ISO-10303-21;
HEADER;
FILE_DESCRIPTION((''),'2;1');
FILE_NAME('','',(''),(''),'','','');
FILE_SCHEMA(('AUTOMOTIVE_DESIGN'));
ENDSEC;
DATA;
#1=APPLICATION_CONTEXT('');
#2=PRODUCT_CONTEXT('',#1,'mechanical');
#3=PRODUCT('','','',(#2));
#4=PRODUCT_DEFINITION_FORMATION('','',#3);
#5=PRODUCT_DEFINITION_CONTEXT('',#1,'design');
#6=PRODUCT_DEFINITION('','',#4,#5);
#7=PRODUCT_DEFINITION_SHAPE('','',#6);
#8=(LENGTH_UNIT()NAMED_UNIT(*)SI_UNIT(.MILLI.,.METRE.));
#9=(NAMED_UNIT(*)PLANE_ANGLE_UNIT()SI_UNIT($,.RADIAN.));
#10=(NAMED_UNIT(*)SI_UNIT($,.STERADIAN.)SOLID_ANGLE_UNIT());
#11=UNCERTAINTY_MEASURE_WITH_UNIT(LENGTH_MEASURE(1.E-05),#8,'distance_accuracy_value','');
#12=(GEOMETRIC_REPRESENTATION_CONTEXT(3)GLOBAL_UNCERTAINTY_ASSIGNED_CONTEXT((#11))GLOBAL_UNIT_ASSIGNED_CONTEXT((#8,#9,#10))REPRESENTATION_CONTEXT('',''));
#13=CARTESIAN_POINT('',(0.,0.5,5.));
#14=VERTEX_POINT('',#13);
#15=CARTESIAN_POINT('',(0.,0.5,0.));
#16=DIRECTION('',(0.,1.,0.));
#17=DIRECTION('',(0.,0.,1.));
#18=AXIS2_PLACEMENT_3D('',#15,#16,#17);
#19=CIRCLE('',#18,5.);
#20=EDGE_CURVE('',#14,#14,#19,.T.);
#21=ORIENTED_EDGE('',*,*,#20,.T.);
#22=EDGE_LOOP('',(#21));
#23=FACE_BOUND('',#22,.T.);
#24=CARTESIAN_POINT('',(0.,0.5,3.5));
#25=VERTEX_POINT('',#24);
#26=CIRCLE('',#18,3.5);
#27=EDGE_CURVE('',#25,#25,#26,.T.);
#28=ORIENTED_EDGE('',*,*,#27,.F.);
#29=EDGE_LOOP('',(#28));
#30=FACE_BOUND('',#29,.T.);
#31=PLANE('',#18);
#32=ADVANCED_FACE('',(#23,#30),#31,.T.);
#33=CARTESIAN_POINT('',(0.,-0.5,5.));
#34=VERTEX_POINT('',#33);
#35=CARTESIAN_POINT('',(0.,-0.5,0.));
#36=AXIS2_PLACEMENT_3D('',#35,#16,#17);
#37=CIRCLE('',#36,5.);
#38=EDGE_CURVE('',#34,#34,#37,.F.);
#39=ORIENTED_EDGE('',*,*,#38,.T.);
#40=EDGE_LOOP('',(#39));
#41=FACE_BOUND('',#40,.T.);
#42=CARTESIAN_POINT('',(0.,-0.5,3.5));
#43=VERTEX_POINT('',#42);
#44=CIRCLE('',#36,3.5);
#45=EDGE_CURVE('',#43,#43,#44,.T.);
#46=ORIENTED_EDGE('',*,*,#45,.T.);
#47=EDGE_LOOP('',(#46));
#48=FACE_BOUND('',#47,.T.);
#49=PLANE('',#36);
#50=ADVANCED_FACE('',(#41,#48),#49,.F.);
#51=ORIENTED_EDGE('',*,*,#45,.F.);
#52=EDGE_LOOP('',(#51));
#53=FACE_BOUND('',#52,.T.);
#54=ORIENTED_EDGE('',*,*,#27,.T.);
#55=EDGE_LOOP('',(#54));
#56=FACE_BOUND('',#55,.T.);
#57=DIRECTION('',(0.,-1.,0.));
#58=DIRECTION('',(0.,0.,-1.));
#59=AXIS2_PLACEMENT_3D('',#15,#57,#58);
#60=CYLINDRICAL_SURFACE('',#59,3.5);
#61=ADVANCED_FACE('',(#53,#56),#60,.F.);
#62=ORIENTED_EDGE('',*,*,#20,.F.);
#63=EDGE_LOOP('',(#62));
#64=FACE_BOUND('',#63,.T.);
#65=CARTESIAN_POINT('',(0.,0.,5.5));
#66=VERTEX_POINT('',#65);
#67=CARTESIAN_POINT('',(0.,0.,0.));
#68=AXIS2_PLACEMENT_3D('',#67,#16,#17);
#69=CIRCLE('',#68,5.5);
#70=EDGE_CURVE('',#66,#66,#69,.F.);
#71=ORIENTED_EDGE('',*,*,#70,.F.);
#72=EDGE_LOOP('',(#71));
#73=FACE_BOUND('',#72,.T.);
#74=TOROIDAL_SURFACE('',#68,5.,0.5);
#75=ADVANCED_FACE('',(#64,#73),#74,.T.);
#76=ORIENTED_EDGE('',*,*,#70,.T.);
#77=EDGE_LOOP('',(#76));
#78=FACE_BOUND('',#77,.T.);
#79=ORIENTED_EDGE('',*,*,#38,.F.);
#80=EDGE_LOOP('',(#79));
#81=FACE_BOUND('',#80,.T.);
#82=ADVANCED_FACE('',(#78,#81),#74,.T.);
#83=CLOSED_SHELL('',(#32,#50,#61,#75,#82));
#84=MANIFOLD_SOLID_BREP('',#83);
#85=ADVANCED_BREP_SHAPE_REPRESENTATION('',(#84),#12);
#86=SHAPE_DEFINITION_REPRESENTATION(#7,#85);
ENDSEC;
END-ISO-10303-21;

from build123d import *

# Parameters (mm, degrees)
SKETCH_1_R      = 5.5
SKETCH_1_R_2    = 3.5
EXTRUDE_1_DEPTH = 0.5
FILLET_1_R      = 0.5


with BuildPart() as part:
    # 草图1 → 凸台-拉伸1 (new, symmetric)
    with BuildSketch(Plane(origin=(0, 0, 0), x_dir=(1, 0, 0), z_dir=(0, 1, 0))):
        with Locations(Location((0, 0, 0), (0, 0, 270))):
            Circle(SKETCH_1_R)
        with Locations(Location((0, 0, 0), (0, 0, 270))):
            Circle(SKETCH_1_R_2, mode=Mode.SUBTRACT)
    extrude(amount=EXTRUDE_1_DEPTH, both=True)

    # 圆角1
    fillet_1_edges = [part.edges().sort_by_distance(p)[0] for p in [
        (0, -0.5, -5.5),
        (0, 0.5, -5.5),
    ]]
    fillet(fillet_1_edges, radius=FILLET_1_R - 0.0001)  # a hair under: the kernel refuses the full size


solid = part.part
